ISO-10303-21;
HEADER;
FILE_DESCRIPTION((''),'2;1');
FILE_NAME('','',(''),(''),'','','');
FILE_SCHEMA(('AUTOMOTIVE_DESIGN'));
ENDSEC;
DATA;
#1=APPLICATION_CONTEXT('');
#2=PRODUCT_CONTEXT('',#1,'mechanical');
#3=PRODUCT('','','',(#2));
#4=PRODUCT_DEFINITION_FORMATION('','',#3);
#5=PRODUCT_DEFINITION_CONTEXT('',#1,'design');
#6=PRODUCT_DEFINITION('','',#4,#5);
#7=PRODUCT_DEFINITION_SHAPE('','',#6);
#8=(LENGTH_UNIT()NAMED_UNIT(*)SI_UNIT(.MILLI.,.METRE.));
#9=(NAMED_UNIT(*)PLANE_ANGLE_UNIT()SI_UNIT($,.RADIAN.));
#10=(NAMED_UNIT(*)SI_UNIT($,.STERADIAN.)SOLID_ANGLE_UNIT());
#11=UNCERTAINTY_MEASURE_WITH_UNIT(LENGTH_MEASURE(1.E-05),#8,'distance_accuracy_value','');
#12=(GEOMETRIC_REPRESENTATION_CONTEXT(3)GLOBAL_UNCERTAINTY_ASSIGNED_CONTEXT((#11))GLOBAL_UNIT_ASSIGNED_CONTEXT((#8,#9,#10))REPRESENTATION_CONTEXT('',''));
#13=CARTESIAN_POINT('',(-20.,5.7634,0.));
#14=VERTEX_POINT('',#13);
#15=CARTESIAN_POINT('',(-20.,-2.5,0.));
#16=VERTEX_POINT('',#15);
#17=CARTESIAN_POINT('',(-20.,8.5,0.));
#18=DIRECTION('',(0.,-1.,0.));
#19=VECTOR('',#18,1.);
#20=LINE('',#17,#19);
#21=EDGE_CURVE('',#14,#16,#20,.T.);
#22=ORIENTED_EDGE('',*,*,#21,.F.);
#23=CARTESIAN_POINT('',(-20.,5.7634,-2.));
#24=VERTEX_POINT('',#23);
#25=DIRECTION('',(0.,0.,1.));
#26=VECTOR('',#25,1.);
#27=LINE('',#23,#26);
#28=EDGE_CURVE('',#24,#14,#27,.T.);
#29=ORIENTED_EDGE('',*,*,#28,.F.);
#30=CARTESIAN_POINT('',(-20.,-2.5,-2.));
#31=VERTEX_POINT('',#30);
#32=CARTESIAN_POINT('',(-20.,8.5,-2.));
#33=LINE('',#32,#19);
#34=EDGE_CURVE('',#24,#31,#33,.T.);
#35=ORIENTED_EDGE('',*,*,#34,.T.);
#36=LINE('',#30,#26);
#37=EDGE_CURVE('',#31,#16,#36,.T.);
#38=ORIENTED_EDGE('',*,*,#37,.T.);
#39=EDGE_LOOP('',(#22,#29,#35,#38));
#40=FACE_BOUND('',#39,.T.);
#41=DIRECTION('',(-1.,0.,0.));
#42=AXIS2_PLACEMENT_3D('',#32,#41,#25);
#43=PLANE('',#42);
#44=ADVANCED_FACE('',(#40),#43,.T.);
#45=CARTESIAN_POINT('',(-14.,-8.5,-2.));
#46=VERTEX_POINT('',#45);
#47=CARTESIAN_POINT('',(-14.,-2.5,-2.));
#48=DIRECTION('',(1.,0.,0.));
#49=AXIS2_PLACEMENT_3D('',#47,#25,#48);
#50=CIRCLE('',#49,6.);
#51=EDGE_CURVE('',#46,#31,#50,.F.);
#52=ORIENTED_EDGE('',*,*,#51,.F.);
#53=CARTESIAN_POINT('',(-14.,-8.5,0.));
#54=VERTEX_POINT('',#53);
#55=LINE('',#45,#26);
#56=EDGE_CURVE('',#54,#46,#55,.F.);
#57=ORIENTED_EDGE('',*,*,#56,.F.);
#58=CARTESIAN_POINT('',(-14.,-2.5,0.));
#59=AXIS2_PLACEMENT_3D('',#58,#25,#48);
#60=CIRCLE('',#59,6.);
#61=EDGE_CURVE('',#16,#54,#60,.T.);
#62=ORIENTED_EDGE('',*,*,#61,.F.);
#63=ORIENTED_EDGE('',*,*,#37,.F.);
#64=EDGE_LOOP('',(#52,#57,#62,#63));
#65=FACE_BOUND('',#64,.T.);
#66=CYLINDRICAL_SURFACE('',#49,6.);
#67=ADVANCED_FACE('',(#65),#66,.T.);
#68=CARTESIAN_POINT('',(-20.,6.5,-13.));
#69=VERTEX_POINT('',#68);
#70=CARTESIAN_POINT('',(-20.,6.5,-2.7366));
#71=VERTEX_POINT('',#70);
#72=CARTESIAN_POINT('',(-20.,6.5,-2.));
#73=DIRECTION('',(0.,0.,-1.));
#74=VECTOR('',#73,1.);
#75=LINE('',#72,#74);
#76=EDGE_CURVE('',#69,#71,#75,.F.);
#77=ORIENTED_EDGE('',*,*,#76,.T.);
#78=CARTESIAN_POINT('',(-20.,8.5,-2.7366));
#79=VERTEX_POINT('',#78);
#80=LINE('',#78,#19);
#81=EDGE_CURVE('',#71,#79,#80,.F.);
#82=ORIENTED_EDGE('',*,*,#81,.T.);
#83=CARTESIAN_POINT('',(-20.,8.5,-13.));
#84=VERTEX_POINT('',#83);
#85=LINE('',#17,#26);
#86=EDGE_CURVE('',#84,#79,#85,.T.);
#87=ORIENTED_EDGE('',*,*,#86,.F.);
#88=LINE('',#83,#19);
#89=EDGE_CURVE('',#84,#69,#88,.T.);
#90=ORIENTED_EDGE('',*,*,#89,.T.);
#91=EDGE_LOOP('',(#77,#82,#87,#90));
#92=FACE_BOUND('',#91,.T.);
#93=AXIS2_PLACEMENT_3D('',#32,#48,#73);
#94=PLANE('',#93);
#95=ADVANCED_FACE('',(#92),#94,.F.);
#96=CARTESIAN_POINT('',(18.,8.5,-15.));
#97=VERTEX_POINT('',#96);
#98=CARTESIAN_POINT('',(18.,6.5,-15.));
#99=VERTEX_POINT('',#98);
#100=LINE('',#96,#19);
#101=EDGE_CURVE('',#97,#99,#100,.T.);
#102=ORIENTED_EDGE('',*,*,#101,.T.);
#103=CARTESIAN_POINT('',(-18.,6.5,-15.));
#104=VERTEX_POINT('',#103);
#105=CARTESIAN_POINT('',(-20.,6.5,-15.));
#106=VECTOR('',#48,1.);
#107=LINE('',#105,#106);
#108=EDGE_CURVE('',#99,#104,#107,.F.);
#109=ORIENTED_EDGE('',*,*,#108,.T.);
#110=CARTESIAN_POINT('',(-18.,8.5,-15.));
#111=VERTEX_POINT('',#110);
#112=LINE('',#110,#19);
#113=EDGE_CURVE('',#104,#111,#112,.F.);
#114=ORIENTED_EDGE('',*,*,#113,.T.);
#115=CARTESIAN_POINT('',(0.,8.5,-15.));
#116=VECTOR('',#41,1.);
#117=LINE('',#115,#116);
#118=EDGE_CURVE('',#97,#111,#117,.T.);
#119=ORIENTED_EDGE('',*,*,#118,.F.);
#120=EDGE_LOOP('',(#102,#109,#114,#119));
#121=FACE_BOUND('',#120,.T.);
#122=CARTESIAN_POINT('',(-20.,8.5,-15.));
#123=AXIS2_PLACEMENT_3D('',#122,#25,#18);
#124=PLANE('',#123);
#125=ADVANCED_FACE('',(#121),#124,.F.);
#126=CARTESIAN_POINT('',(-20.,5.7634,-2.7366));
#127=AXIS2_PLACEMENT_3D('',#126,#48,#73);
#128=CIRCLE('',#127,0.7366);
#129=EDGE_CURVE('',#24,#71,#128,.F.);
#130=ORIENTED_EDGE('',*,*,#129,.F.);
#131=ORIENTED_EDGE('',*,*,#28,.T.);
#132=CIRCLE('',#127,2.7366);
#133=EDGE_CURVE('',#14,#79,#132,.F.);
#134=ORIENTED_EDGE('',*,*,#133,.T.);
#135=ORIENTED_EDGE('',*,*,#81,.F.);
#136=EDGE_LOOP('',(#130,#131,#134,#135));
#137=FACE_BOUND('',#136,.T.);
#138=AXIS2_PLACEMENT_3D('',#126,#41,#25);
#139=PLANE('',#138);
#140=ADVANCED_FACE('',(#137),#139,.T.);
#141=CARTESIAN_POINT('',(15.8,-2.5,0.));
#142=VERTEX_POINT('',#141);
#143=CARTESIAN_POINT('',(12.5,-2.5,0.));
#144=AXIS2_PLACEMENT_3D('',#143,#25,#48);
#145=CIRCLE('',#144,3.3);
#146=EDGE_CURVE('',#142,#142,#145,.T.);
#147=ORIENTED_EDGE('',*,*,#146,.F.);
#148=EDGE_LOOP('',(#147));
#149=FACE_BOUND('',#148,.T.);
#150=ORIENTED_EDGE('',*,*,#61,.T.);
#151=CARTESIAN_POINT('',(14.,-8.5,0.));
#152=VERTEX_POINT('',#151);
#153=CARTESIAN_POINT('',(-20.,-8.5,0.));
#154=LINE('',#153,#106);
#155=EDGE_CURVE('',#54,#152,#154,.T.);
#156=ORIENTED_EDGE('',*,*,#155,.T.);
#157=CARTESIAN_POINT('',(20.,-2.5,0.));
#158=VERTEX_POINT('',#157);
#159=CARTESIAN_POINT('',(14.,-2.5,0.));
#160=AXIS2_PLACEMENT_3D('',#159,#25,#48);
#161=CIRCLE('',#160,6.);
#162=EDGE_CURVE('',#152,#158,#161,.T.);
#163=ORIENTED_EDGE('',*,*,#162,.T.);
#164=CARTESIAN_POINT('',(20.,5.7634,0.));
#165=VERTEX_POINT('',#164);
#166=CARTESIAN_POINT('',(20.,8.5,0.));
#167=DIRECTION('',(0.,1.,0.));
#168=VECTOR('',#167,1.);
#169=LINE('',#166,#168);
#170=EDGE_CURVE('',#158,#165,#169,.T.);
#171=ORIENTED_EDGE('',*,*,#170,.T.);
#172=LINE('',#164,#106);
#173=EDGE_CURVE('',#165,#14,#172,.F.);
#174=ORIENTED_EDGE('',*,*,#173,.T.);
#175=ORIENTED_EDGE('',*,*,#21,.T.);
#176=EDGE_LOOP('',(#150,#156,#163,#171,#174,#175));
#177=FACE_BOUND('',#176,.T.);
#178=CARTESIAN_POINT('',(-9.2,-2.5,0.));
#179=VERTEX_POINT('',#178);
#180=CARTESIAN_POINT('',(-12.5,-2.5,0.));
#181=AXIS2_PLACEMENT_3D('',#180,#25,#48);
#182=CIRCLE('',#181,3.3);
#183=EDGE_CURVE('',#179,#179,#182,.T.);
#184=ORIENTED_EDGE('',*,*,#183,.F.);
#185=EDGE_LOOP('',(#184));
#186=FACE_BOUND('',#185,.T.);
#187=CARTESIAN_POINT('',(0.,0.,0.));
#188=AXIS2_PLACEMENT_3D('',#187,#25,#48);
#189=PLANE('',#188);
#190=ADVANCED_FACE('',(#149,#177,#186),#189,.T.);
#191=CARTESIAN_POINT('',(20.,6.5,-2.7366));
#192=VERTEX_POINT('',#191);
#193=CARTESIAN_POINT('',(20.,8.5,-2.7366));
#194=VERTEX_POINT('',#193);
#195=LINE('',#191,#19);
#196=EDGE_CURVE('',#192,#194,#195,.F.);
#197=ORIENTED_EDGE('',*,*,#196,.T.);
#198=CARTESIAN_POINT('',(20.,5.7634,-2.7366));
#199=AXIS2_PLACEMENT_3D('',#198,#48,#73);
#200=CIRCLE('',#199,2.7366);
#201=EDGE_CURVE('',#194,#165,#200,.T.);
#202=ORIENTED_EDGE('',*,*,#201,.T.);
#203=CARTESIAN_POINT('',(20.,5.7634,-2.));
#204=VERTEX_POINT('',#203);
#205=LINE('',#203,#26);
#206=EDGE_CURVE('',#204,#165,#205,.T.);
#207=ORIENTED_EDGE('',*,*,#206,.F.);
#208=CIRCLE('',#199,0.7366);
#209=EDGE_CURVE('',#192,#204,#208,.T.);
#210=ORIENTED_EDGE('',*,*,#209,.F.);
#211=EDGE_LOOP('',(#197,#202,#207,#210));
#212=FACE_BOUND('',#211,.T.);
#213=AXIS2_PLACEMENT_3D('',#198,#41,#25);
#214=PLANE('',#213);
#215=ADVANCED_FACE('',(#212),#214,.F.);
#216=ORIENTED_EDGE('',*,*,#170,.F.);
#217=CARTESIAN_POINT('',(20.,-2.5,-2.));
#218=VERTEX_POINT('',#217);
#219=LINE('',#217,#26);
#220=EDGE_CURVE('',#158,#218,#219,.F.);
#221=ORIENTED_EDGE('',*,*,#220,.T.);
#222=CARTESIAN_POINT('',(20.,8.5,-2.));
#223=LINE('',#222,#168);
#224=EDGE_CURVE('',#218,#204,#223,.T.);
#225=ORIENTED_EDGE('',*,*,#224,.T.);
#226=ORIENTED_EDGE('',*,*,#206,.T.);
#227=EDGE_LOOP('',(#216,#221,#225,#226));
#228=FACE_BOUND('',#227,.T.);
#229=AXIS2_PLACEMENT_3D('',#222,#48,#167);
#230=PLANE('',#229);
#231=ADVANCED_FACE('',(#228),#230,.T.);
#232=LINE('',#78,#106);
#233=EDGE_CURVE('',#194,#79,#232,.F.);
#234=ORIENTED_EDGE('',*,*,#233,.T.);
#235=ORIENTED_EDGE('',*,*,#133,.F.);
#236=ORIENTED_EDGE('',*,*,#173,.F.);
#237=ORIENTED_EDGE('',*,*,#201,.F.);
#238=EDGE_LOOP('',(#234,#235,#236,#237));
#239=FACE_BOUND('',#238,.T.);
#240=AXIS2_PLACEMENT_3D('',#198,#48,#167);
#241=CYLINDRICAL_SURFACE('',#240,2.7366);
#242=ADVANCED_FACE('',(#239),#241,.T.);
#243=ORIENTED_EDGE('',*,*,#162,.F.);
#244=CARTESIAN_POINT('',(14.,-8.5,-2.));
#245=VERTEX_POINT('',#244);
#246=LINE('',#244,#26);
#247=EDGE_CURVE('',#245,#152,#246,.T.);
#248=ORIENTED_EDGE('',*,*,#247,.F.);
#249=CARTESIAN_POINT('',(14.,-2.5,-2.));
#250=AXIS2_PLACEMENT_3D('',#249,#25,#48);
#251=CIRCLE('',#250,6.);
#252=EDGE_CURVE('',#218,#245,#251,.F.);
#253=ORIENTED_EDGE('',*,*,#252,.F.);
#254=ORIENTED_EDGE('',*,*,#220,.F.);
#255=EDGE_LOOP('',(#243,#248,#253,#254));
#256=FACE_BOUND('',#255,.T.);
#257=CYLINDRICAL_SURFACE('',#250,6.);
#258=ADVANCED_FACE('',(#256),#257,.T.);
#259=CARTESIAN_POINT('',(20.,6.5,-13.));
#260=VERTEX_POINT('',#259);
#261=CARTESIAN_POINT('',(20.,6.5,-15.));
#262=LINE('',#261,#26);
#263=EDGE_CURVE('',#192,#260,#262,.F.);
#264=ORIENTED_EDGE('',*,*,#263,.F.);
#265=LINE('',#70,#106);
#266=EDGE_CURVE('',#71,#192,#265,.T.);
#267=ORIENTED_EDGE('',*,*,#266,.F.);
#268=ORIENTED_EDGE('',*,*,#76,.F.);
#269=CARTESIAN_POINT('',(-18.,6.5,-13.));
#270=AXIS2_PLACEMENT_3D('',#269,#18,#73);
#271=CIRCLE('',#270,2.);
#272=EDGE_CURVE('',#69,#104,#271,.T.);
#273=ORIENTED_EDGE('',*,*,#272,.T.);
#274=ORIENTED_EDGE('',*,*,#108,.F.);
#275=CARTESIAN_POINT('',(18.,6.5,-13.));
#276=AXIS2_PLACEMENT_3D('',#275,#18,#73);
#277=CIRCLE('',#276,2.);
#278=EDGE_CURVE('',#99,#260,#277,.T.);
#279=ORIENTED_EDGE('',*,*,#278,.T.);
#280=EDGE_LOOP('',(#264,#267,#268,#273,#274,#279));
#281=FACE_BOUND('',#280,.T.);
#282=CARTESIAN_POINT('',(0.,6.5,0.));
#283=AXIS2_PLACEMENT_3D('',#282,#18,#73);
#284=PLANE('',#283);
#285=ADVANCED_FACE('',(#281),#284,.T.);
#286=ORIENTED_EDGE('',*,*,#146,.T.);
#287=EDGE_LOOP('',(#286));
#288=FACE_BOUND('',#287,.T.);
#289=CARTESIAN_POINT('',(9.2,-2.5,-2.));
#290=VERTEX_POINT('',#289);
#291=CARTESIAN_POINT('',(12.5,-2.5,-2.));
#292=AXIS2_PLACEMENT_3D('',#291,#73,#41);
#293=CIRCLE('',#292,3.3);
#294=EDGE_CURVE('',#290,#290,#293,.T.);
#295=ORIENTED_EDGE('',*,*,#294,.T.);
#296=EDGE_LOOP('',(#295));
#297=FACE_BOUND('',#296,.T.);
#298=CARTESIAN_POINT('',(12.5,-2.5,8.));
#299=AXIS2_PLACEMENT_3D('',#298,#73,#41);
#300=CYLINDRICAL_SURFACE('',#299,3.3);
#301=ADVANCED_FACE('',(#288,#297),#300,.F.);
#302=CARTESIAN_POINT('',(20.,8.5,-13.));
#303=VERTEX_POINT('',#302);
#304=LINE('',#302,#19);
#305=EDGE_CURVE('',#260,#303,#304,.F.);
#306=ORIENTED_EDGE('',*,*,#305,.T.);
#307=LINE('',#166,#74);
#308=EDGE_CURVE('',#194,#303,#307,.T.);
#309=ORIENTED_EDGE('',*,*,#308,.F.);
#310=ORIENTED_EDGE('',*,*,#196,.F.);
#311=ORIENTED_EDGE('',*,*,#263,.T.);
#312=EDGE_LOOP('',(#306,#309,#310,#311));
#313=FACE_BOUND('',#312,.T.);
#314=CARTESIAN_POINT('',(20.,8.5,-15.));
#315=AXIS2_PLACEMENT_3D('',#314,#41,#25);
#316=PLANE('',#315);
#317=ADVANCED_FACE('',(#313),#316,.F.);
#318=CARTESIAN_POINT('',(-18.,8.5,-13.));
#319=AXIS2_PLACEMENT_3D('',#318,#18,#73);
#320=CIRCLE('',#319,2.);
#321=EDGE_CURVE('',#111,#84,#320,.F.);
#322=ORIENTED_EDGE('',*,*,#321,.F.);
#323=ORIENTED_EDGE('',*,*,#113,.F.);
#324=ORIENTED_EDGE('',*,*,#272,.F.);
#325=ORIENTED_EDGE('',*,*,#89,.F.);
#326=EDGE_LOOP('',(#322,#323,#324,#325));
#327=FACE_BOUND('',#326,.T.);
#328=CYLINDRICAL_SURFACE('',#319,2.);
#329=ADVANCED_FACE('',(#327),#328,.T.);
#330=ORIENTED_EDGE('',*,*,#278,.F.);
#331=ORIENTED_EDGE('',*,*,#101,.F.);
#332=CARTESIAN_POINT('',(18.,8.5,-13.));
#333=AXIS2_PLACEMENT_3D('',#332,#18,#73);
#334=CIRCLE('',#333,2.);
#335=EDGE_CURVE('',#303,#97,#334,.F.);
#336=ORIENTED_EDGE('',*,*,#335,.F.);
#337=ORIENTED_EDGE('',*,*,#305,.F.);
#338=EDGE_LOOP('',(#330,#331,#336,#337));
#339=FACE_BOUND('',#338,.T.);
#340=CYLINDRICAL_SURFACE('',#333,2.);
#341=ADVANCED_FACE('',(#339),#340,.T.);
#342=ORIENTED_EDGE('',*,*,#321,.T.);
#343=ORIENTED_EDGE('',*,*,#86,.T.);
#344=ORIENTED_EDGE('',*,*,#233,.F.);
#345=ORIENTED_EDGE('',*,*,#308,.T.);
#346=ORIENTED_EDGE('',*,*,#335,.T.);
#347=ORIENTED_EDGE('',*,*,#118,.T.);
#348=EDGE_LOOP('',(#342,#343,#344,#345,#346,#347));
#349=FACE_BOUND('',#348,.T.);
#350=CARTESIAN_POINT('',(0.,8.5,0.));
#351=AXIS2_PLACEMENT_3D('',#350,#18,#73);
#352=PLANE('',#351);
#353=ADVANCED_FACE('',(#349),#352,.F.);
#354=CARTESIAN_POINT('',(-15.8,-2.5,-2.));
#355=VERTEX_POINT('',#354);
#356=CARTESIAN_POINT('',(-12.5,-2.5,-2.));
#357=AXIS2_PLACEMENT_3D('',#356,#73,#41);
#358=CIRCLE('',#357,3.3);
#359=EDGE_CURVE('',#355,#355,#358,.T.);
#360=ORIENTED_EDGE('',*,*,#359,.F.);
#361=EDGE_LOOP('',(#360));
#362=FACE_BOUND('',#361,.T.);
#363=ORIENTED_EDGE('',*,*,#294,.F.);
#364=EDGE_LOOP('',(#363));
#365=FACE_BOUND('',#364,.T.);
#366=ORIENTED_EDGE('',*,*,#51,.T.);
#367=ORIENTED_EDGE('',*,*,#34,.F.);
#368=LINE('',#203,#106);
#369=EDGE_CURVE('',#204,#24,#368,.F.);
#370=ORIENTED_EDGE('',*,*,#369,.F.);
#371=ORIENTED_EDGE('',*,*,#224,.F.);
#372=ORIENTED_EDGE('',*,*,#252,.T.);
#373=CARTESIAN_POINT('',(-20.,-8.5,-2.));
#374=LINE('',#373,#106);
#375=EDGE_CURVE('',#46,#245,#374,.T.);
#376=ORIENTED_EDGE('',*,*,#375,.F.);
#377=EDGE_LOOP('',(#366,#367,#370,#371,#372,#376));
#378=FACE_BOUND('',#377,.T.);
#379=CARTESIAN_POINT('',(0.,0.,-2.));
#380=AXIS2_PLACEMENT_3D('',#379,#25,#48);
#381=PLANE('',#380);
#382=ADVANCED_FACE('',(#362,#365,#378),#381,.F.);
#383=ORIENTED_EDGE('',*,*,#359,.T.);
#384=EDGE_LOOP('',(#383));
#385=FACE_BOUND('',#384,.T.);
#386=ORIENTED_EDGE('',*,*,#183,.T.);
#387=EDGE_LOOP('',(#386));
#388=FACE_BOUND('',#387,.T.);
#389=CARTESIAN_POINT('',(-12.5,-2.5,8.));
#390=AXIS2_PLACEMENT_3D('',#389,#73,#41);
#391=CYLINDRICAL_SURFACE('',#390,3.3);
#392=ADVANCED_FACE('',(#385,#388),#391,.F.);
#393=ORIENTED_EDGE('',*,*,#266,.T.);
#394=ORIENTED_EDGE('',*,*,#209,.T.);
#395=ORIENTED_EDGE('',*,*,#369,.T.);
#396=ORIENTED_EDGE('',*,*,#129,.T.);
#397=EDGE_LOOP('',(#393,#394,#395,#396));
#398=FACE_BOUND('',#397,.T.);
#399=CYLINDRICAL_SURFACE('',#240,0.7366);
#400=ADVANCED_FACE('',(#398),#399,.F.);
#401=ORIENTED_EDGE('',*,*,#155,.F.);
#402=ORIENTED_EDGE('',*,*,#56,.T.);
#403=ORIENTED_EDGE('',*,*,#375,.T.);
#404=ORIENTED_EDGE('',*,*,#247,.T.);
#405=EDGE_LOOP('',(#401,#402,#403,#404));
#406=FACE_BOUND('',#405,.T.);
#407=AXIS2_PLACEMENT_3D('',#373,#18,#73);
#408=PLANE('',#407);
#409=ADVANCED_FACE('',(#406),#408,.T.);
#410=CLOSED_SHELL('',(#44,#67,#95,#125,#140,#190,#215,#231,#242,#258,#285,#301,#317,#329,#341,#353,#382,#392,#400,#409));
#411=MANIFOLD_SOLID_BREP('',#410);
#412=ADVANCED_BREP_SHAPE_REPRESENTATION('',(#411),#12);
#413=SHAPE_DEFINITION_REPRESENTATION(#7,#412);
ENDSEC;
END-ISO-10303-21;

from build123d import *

# Parameters (mm, degrees)
SKETCH_2_W                       = 40
SKETCH_2_H                       = 17
SM_BASE_FLANGE_1_DEPTH           = 2
SM_EDGE_FLANGE_1_STRIP_W         = 9.4732
SM_EDGE_FLANGE_1_STRIP_H         = 2
SM_EDGE_FLANGE_1_STRIP_CUT_DEPTH = 40
SM_EDGE_FLANGE_1_DEPTH           = 40
SKETCH_10_R                      = 3.3
CUT_EXTRUDE_1_DEPTH              = 10
FILLET_1_R                       = 6
FILLET_2_R                       = 2


# Sheet-metal steps are written as plain solids
with BuildPart() as part:
    # Sketch 2 → 基体-法兰1 (new body)
    with BuildSketch(Plane.XY):
        Rectangle(SKETCH_2_W, SKETCH_2_H)
    extrude(amount=-SM_BASE_FLANGE_1_DEPTH)

    # 边线-法兰1 strip (across the edge) → 边线-法兰1 strip cut (cut)
    with BuildSketch(Plane(origin=(-20, 8.5, -2), x_dir=(0, -1, 0), z_dir=(1, 0, 0))):
        with Locations((-2, -1)):
            Rectangle(SM_EDGE_FLANGE_1_STRIP_W, SM_EDGE_FLANGE_1_STRIP_H)
    extrude(amount=SM_EDGE_FLANGE_1_STRIP_CUT_DEPTH, mode=Mode.SUBTRACT)

    # 边线-法兰1 section (across the edge) → 边线-法兰1 (add)
    with BuildSketch(Plane(origin=(-20, 8.5, -2), x_dir=(0, -1, 0), z_dir=(1, 0, 0))):
        with BuildLine():
            Line((0, 0.7366), (0, 13))
            Line((0, 13), (2, 13))
            Line((2, 13), (2, 0.7366))
            ThreePointArc((2, 0.7366), (2.215745145, 0.215745145), (2.7366, 0))
            Line((2.7366, 0), (2.7366, -2))
            ThreePointArc((2.7366, -2), (0.801531583, -1.198468417), (0, 0.7366))
        make_face()
    extrude(amount=SM_EDGE_FLANGE_1_DEPTH)

    # 草图10 → 切除-拉伸1 (cut)
    with BuildSketch(Plane(origin=(0, 0, -2), x_dir=(-1, 0, 0), z_dir=(0, 0, -1))):
        with Locations((-12.5, -2.5)):
            Circle(SKETCH_10_R)
        with Locations((12.5, -2.5)):
            Circle(SKETCH_10_R)
    extrude(amount=-CUT_EXTRUDE_1_DEPTH, mode=Mode.SUBTRACT)

    # 圆角1
    fillet_1_edges = [part.edges().sort_by_distance(p)[0] for p in [
        (20, -8.5, -1),
        (-20, -8.5, -1),
    ]]
    fillet(fillet_1_edges, radius=FILLET_1_R)

    # 圆角2
    fillet_2_edges = [part.edges().sort_by_distance(p)[0] for p in [
        (-20, 7.5, -15),
        (20, 7.5, -15),
    ]]
    fillet(fillet_2_edges, radius=FILLET_2_R)


solid = part.part
